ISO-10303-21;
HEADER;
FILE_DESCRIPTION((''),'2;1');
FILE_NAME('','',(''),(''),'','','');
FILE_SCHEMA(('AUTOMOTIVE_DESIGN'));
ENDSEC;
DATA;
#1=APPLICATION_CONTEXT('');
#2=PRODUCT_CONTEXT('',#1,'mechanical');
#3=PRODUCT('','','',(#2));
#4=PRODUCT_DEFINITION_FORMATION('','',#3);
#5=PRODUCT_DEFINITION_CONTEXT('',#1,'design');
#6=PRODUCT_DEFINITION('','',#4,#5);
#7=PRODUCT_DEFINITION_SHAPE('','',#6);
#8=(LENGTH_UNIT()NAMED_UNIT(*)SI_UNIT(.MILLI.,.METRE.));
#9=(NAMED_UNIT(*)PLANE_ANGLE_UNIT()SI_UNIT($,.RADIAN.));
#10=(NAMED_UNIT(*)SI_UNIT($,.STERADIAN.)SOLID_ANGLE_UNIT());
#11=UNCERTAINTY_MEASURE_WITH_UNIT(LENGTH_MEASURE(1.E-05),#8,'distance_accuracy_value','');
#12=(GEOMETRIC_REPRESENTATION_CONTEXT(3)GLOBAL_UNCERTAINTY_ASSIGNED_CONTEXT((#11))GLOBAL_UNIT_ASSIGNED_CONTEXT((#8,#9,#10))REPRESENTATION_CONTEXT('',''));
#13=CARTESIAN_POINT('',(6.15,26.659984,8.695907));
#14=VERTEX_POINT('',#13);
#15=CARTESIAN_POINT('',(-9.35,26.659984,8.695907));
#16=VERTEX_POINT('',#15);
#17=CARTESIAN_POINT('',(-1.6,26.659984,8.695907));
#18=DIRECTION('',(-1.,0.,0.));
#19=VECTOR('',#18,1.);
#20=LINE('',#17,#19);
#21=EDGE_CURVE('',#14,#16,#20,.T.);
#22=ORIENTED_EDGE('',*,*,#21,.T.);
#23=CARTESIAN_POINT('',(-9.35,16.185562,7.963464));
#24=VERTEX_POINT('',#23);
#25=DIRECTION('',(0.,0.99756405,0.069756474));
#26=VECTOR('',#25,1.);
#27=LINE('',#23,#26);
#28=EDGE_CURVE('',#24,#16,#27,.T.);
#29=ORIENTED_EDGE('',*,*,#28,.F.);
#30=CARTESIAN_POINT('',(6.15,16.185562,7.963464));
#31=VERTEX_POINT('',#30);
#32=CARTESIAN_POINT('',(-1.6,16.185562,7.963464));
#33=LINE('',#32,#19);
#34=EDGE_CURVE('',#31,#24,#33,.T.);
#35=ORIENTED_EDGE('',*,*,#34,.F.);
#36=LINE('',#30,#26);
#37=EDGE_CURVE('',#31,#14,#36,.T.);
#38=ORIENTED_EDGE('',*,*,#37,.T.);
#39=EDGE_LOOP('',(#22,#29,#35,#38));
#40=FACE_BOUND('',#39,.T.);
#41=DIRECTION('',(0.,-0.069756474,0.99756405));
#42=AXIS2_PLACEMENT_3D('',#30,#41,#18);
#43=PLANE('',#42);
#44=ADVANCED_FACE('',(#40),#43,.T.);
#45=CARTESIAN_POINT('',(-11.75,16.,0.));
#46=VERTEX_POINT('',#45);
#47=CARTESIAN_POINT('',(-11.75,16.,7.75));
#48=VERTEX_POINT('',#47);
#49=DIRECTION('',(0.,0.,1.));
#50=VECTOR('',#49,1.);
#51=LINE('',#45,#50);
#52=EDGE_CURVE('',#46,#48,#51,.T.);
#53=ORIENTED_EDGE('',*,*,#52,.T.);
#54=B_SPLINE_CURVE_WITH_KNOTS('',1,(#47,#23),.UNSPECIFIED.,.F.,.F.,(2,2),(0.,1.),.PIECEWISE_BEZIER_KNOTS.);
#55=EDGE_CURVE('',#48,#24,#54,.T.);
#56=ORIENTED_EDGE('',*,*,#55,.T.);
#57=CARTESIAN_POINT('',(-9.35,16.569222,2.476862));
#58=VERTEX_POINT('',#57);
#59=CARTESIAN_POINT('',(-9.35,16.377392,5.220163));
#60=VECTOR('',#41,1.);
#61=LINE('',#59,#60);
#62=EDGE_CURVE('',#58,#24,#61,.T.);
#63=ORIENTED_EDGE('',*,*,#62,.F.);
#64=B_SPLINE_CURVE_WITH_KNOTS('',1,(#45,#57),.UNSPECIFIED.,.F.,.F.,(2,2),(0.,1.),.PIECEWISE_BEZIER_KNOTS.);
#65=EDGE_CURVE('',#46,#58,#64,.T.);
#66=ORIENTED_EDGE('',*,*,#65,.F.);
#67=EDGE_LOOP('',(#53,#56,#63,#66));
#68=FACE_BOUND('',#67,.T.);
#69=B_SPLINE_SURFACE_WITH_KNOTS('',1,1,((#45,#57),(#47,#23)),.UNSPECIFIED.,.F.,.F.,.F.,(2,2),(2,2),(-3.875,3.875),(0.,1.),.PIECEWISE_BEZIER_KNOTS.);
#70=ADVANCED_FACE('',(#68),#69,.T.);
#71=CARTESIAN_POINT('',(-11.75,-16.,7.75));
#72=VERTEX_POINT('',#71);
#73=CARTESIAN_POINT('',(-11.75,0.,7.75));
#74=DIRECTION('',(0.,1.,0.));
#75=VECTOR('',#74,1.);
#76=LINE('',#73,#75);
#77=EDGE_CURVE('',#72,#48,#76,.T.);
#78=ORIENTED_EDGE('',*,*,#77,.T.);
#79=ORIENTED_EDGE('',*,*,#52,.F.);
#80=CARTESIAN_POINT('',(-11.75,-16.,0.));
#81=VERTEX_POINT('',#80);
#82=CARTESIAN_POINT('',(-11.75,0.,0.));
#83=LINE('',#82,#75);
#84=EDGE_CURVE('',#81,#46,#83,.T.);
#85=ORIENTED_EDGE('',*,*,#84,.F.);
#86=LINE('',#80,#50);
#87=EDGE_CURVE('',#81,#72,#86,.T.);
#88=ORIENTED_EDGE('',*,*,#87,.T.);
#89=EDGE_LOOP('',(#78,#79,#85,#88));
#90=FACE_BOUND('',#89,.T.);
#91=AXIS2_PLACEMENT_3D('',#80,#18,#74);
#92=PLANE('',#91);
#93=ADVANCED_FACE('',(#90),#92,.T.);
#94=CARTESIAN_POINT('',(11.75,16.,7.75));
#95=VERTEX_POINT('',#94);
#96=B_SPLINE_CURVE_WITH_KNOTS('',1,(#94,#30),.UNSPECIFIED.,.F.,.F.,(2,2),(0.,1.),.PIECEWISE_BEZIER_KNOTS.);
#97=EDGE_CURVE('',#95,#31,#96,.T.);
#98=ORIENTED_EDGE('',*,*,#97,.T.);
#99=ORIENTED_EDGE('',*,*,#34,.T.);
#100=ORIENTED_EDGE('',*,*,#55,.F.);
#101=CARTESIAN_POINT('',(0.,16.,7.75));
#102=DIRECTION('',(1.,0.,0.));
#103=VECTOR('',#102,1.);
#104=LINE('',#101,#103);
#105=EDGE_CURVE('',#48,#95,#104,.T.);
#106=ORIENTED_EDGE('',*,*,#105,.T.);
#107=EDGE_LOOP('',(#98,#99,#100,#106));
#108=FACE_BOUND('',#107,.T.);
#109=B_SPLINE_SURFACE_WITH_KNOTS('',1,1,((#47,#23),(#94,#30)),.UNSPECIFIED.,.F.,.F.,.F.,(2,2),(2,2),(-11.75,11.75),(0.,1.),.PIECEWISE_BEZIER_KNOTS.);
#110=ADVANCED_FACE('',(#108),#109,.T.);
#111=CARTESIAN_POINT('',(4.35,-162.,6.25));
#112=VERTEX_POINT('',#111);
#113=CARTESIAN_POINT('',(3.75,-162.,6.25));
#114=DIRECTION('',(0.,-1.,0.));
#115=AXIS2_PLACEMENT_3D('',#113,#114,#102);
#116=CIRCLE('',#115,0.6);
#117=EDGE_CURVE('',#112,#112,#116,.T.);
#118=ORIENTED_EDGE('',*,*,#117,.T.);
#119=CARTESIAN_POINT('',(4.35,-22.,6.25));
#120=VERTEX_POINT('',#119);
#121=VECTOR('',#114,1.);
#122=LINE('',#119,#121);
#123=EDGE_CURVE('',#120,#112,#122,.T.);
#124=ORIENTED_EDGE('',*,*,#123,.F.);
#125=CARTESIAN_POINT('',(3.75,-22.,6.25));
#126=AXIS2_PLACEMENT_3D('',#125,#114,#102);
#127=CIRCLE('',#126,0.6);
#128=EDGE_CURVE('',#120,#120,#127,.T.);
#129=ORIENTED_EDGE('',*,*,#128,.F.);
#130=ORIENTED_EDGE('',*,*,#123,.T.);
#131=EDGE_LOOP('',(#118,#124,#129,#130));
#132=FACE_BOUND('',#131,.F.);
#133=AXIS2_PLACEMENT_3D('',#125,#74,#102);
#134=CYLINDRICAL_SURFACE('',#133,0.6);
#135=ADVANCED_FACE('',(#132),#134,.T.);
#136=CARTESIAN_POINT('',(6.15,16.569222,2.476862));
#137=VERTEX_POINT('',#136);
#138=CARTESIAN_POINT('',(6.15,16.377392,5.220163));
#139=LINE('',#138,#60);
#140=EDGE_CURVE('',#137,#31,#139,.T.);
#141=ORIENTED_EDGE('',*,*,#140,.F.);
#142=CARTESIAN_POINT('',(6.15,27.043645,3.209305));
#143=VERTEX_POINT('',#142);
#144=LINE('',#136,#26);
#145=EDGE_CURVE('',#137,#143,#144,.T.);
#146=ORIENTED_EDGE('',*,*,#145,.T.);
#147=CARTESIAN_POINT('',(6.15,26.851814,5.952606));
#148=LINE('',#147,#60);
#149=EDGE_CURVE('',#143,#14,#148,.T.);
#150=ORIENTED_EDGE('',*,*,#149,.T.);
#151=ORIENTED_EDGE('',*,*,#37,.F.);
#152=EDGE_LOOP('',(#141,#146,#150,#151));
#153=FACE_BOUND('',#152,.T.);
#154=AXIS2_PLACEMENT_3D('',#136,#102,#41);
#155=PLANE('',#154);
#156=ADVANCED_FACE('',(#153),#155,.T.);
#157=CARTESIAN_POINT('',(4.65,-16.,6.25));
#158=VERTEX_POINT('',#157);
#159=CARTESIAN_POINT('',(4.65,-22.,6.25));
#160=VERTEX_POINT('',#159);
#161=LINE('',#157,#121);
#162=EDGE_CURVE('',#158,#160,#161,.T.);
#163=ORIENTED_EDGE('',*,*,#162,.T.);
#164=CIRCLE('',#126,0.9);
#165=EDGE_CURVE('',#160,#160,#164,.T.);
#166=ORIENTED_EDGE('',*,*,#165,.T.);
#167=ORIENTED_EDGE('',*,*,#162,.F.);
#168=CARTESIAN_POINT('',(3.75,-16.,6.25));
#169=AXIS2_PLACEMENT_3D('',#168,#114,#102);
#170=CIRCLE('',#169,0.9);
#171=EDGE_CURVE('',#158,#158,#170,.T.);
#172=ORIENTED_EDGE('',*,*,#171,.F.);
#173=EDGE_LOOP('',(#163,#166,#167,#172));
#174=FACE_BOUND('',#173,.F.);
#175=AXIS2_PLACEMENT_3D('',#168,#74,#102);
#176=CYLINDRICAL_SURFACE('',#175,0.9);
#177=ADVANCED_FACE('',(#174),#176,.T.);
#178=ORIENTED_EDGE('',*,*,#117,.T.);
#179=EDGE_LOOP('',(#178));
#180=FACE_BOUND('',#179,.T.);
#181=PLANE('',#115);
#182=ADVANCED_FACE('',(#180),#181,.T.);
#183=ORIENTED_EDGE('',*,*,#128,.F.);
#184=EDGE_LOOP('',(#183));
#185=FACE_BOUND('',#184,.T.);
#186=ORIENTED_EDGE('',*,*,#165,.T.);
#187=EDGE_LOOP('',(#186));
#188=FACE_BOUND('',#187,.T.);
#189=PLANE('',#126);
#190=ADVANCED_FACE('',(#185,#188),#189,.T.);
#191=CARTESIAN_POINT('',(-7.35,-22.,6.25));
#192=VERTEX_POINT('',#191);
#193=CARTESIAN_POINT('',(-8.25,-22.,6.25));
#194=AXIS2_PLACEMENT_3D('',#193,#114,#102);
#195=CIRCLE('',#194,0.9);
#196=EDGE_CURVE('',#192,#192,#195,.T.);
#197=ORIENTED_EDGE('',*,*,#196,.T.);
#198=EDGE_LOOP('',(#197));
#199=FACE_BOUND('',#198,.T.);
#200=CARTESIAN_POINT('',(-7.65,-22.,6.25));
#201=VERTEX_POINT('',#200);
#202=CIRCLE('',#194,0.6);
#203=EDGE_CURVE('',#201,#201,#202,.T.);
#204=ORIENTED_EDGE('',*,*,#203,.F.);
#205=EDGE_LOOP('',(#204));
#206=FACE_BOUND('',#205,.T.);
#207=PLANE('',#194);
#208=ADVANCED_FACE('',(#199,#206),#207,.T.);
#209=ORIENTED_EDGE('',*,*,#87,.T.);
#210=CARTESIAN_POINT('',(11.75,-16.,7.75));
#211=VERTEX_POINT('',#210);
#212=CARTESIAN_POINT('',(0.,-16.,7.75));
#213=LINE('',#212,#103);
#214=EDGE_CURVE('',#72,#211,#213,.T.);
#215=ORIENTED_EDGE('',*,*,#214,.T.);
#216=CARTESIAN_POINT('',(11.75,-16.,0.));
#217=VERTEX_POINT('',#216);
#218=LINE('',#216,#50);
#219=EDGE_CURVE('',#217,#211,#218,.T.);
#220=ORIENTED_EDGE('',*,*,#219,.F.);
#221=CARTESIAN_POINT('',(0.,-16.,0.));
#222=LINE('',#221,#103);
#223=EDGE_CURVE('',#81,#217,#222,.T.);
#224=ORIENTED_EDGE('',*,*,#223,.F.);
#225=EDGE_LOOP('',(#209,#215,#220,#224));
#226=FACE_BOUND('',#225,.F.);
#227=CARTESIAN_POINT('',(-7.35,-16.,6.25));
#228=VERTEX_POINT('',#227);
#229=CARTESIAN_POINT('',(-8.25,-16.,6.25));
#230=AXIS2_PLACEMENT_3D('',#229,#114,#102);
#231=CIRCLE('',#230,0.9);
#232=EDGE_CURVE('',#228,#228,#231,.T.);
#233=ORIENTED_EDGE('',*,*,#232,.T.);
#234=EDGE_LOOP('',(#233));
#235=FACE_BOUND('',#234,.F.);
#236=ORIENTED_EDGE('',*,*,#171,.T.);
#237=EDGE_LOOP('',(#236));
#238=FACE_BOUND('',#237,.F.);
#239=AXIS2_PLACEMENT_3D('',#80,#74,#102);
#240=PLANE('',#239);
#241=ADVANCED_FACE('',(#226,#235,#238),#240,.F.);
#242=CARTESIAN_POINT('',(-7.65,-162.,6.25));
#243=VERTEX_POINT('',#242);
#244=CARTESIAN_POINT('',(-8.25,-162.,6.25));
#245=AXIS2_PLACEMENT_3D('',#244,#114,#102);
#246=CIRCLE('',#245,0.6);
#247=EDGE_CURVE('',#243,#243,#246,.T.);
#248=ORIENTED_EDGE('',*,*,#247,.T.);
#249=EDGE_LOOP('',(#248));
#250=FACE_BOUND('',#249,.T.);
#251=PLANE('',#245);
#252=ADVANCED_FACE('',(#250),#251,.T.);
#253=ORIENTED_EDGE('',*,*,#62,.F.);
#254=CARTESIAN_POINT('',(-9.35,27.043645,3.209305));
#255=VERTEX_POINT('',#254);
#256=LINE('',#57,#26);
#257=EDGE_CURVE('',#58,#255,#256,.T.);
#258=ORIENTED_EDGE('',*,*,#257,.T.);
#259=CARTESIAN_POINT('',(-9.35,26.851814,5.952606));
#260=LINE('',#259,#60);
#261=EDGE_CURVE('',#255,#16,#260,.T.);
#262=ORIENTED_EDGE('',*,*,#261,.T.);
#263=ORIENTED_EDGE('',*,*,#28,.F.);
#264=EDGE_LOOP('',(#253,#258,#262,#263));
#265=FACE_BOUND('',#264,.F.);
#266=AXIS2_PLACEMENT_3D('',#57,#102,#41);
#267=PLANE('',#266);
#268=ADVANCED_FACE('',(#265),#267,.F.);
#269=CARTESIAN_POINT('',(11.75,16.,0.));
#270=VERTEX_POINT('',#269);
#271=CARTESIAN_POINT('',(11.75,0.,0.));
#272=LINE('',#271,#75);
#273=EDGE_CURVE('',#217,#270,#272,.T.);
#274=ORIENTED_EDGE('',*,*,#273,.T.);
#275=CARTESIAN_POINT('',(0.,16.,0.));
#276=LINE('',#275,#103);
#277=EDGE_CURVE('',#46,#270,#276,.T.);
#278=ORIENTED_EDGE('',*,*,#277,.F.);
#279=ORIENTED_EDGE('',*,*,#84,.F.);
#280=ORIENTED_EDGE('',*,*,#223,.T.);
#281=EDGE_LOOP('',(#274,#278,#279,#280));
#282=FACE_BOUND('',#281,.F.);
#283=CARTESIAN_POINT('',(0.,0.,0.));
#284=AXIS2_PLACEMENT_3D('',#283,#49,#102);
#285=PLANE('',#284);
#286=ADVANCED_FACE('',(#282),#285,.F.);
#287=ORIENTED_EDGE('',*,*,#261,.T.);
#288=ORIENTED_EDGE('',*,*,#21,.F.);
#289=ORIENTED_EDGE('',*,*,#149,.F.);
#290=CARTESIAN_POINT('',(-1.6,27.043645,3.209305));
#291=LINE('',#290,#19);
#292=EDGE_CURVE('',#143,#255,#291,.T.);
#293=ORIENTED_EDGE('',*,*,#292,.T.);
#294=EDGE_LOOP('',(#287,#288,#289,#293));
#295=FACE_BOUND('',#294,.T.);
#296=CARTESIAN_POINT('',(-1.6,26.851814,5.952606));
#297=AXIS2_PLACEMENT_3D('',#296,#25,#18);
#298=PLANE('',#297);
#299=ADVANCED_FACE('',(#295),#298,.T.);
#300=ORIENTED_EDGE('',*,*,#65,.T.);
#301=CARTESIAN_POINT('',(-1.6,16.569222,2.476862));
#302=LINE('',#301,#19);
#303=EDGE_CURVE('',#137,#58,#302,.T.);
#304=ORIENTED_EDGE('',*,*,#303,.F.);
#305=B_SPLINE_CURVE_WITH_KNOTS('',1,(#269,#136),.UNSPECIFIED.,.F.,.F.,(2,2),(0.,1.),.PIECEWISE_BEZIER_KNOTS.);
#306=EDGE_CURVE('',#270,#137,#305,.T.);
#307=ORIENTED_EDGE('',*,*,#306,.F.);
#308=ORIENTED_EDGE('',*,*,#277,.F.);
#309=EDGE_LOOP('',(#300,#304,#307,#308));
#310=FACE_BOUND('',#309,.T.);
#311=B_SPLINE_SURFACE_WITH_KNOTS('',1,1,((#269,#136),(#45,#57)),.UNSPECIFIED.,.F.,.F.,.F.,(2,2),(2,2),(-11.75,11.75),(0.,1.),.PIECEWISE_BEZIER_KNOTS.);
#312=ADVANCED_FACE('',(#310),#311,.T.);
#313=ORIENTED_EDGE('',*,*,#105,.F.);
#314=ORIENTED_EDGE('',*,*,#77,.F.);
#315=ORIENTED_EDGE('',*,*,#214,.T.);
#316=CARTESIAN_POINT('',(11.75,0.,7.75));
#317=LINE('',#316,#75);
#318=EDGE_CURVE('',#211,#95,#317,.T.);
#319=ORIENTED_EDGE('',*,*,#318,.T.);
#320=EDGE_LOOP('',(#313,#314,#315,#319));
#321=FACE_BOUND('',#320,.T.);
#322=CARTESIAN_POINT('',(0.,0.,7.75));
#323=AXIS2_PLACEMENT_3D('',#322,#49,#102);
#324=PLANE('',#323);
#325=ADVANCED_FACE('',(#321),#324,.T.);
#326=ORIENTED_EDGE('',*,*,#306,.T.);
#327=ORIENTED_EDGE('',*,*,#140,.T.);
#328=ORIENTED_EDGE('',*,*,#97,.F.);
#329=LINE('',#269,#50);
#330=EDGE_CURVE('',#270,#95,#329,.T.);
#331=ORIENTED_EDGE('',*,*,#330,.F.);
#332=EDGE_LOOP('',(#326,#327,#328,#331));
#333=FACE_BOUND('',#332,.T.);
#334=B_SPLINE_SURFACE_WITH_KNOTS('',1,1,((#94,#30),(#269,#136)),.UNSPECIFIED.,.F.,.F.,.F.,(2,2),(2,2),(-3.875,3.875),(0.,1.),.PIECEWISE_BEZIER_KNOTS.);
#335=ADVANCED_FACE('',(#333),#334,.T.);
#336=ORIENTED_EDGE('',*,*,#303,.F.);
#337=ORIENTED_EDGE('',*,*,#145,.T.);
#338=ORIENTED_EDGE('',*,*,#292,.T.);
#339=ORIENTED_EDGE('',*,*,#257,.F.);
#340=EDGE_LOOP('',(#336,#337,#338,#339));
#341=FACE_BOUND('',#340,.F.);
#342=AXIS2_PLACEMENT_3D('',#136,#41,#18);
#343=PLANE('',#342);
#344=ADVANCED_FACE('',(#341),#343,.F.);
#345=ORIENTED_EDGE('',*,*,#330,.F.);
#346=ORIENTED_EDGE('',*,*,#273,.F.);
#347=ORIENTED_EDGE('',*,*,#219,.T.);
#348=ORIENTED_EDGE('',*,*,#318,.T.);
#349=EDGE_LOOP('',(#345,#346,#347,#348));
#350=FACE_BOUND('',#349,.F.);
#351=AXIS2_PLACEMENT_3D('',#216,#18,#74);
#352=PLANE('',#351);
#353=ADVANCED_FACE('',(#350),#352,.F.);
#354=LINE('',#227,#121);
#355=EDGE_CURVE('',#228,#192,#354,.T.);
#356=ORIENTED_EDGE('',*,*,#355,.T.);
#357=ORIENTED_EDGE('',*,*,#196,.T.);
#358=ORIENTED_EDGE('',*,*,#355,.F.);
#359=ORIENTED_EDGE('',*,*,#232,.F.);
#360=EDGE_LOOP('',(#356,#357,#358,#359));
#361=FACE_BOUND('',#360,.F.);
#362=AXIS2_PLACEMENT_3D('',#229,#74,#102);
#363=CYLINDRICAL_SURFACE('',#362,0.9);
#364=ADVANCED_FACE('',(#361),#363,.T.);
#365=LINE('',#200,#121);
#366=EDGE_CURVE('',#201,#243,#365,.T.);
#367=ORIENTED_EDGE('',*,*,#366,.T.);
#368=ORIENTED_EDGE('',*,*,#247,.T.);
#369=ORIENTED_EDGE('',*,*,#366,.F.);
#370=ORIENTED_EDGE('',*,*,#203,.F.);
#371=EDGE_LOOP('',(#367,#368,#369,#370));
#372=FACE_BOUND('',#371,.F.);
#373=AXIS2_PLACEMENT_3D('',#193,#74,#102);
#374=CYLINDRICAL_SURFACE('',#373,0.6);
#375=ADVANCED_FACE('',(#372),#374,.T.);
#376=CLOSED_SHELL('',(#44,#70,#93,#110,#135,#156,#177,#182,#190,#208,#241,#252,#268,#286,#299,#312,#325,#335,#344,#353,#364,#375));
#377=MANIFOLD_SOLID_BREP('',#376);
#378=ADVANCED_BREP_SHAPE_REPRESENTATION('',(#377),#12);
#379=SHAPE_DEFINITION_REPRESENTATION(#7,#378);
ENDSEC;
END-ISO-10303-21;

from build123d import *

# Parameters (mm, degrees)
F0_W      = 23.5
F0_H      = 32
F1_DEPTH  = 7.75
F4_W      = 15.5
F4_H      = 5.5
F5_DEPTH  = 10.5
F1_FACE_W = 23.5
F1_FACE_H = 7.75
F5_FACE_W = 15.5
F5_FACE_H = 5.5
F7_R      = 0.9
F8_DEPTH  = 6
F9_R      = 0.6
F10_DEPTH = 140


with BuildPart() as f1:
    # F0 (on Top) → F1 (new body)
    with BuildSketch(Plane.XY):
        Rectangle(F0_W, F0_H)
    extrude(amount=F1_DEPTH)



with BuildPart() as f5:
    # F4 (on face) → F5 (new body)
    with BuildSketch(Plane(origin=(0, 16.6609531262, 1.1650473361), x_dir=(-1, 0, 0), z_dir=(0, 0.9975640503, 0.0697564737))):
        with Locations((1.6, 4.0650178096)):
            Rectangle(F4_W, F4_H)
    extrude(amount=F5_DEPTH)


with BuildPart() as f1_1:
    add(f1.part)

    add(f5.part)  # F6 merges F5
    # F1_face (on face) → F6 section 0
    with BuildSketch(Plane(origin=(0, 16, 3.875), x_dir=(-1, 0, 0), z_dir=(0, 1, 0))):
        Rectangle(F1_FACE_W, F1_FACE_H)
    # F5_face (on face) → F6 section 1
    with BuildSketch(Plane(origin=(-1.6, 16.3773918181, 5.2201629666), x_dir=(-1, 0, 0), z_dir=(0, -0.9975640503, -0.0697564737))):
        Rectangle(F5_FACE_W, F5_FACE_H)
    loft()

    # F7 (on face) → F8 (join)
    with BuildSketch(Plane.XZ.offset(16)):
        with Locations((-8.25, 6.25)):
            Circle(F7_R)
        with Locations((3.75, 6.25)):
            Circle(F7_R)
    extrude(amount=F8_DEPTH)

    # F9 (on face) → F10 (join)
    with BuildSketch(Plane.XZ.offset(22)):
        with Locations((-8.25, 6.25)):
            Circle(F9_R)
        with Locations((3.75, 6.25)):
            Circle(F9_R)
    extrude(amount=F10_DEPTH)


solid = f1_1.part
